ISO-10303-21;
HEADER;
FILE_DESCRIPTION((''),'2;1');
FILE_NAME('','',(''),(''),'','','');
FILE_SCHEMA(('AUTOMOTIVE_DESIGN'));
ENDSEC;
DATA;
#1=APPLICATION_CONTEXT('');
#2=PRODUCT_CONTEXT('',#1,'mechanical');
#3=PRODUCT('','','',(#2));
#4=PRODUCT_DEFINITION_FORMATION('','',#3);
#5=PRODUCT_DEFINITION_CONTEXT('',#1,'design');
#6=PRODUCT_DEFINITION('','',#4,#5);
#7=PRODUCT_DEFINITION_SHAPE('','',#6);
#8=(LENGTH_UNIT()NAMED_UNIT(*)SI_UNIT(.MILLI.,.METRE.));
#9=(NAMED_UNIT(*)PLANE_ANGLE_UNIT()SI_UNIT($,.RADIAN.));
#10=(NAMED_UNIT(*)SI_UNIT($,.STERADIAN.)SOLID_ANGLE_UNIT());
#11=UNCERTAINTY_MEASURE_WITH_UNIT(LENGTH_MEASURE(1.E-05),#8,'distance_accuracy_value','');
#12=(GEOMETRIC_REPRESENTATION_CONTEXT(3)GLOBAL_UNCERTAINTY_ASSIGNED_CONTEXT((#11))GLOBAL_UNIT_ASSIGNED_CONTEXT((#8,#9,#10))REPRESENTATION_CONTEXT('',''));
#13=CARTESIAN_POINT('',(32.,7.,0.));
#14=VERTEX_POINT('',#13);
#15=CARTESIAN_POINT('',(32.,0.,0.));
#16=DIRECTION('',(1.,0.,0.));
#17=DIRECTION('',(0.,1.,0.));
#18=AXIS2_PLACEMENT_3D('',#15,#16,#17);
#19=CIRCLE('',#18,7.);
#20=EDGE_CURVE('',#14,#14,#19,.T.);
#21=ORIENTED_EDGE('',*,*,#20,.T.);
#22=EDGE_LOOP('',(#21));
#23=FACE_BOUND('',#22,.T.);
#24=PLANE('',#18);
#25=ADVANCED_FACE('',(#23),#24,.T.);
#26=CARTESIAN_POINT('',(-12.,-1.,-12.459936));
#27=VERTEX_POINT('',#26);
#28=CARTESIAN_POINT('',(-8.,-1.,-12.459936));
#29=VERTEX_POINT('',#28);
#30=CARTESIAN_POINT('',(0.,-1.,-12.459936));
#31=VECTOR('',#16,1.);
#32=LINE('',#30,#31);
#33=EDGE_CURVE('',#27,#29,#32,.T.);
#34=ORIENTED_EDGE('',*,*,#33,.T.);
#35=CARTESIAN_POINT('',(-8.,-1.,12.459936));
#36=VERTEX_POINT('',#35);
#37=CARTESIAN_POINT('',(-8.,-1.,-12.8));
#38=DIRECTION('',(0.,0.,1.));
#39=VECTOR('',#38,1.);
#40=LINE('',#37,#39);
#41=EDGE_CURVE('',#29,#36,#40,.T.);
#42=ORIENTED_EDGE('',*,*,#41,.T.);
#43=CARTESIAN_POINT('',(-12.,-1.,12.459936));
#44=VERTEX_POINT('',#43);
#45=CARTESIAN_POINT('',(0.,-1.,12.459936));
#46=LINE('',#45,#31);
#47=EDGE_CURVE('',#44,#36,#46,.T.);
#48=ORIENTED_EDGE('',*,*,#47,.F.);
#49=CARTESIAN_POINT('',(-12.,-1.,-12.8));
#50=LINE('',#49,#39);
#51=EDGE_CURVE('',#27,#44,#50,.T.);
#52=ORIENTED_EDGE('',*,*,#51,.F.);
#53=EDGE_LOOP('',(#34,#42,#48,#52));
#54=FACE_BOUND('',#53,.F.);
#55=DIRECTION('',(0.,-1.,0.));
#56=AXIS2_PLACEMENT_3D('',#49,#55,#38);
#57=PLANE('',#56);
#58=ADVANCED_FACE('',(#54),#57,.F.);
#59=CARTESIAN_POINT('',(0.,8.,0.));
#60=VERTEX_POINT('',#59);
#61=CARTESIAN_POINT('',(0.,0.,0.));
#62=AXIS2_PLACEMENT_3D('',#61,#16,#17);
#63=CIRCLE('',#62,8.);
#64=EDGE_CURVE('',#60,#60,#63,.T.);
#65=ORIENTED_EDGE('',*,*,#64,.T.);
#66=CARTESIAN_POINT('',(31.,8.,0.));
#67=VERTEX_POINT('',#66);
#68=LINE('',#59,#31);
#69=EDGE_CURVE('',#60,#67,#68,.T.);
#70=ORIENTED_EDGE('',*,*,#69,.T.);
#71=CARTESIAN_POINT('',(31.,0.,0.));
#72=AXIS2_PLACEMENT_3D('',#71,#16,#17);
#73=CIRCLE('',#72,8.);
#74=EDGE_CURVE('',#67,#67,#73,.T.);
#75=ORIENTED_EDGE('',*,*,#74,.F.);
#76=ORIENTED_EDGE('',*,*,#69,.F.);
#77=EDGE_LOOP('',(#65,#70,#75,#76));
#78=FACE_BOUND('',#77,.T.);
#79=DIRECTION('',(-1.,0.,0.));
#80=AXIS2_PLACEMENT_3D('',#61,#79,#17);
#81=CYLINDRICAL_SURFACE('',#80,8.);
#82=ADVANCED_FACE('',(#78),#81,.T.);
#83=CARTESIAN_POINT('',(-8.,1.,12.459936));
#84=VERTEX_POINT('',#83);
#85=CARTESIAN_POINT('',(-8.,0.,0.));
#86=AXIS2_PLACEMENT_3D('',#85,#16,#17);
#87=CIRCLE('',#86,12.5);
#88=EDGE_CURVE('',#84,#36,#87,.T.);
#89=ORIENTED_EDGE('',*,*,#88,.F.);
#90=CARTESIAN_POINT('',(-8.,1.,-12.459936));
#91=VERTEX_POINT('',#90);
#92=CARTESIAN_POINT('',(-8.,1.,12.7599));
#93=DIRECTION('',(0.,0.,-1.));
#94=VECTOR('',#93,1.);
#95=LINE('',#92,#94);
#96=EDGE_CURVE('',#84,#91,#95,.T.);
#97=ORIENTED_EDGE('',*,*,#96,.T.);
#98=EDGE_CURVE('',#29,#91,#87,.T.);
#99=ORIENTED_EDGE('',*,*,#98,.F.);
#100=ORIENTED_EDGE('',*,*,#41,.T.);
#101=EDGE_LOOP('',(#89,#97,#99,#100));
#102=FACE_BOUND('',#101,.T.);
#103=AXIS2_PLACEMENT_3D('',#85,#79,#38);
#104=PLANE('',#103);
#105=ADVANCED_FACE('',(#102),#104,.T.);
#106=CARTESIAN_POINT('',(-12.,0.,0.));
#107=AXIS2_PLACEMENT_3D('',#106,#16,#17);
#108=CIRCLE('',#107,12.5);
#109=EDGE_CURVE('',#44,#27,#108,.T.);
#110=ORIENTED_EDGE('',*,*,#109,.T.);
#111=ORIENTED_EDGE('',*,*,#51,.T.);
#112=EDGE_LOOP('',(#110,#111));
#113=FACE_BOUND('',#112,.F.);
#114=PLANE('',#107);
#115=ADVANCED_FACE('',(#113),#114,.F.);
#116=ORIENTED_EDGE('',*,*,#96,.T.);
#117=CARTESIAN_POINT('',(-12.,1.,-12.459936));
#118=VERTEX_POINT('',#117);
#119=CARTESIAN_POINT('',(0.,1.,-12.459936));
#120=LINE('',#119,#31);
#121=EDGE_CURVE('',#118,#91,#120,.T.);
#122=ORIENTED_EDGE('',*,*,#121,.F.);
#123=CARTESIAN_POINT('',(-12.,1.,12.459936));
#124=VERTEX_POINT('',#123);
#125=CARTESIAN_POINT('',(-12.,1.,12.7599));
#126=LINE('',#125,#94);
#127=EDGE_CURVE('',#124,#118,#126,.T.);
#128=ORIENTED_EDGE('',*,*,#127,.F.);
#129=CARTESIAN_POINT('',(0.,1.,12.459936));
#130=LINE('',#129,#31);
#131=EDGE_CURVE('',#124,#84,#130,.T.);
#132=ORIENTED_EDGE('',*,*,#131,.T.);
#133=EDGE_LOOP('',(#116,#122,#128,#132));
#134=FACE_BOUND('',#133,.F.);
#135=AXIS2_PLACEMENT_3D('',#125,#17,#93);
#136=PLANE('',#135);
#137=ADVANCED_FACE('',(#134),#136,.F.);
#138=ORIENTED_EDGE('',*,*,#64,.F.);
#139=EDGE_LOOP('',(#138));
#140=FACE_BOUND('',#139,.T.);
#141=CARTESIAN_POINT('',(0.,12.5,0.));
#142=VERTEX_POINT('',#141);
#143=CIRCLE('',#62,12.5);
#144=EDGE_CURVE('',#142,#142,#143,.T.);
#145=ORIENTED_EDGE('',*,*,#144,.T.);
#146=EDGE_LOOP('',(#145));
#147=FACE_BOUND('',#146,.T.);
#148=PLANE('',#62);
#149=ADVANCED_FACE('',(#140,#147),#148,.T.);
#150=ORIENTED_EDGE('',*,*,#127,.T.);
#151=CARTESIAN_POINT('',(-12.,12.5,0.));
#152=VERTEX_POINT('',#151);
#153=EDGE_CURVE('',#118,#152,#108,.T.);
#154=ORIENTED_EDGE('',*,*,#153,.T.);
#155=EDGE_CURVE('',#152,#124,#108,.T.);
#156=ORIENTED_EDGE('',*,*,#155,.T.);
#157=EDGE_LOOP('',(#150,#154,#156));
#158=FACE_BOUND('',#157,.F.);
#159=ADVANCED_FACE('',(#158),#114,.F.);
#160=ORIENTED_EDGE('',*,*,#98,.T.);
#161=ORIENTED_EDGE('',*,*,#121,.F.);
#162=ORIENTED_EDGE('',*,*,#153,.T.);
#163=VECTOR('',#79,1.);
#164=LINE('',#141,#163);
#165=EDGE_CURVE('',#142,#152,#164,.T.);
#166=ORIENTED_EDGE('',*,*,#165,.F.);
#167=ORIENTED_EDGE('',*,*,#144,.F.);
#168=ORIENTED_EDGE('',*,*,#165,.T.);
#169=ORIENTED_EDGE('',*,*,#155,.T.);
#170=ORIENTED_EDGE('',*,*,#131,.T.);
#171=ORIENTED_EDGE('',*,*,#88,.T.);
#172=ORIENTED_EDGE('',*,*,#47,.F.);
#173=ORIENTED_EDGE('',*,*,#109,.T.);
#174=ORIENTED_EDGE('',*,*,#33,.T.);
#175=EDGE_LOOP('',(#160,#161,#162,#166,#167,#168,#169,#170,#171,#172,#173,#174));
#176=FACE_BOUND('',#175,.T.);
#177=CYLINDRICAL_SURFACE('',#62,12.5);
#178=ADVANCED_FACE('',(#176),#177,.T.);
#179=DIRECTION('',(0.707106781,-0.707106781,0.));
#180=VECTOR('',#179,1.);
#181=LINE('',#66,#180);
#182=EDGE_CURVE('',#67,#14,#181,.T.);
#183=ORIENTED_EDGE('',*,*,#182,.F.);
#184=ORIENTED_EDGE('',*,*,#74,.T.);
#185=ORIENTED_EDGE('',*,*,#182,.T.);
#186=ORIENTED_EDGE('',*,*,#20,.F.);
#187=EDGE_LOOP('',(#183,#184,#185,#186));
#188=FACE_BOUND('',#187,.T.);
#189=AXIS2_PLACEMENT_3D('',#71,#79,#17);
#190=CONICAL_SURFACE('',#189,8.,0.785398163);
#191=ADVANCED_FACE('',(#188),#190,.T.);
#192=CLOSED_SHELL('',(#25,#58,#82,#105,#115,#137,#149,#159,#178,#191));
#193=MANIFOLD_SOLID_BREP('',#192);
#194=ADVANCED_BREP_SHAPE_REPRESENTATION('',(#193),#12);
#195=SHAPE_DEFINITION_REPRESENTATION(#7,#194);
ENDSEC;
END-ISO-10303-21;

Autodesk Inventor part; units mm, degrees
ref_plane "YZ Plane" through (0, 0, 0) normal (1, 0, 0) x (0, 1, 0)
ref_plane "XZ Plane" through (0, 0, 0) normal (0, 1, 0) x (-1, 0, 0)
ref_plane "XY Plane" through (0, 0, 0) normal (0, 0, 1) x (1, 0, 0)
sketch "Sketch1" plane through (0, 0, 0) normal (1, 0, 0) x (0, 1, 0)
  circle A0 centre (0, 0) radius 12.5
  circle A1 centre (0, 0) radius 8
  dimension "d0" = 25
  dimension "d1" = 16
extrude "Extrusion1" add sketch "Sketch1" against normal blind 12 contours A0 | A1
extrude "Extrusion2" add sketch "Sketch1" along normal blind 32 contours A1
chamfer "Chamfer1" distance 1 angle 45 1 edges at (32, -8, 0) measured on face at (32, 0.9456, 2.4934)
thread "Thread1" size "M16x2" class "6g" standard "ANSI Metric M Profile" length 25
sketch "Sketch2" plane through (-12, 0, 0) normal (-1, 0, 0) x (0, 0, 1)
  circle A0 centre (0, 0) radius 12.5 construction
  line L0 (-17.5, 0) -> (17.5, 0) construction
  line L1 (12.4599, -1) -> (12.4599, 1) construction
  line L2 (-12.4599, 1) -> (-12.4599, -1) construction
  line L3 (-12.8, 1) -> (-12.8, -1)
  line L4 (12.7599, -1) -> (12.7599, 1)
  line L5 (-12.8, -1) -> (12.7599, -1)
  line L6 (12.7599, -1) -> (12.7599, 1)
  line L7 (12.7599, 1) -> (-12.8, 1)
  line L8 (-12.8, 1) -> (-12.8, -1)
  point P0 (0, 1)
  point P1 (0, -1)
  point P2 (12.5, 0)
  point P3 (12.5, 0)
  point P4 (-12.5, 0)
  point P5 (-12.5, 0)
  dimension "d11" = 2
  dimension "d14" = 0.3
  dimension "d15" = 0.3
  dimension "d16" = 1
  dimension "d17" = 1
  dimension "d18" = 25.5599
  dimension "d19" = 1
  dimension "d20" = 0
  dimension "d21" = 0
  dimension "d22" = 1
  dimension "d23" = 1
  dimension "d24" = 0
  dimension "d25" = 1
extrude "Extrusion5" cut sketch "Sketch2" against normal blind 4
properties part number "M16bolt" material "Iron, Malleable"
